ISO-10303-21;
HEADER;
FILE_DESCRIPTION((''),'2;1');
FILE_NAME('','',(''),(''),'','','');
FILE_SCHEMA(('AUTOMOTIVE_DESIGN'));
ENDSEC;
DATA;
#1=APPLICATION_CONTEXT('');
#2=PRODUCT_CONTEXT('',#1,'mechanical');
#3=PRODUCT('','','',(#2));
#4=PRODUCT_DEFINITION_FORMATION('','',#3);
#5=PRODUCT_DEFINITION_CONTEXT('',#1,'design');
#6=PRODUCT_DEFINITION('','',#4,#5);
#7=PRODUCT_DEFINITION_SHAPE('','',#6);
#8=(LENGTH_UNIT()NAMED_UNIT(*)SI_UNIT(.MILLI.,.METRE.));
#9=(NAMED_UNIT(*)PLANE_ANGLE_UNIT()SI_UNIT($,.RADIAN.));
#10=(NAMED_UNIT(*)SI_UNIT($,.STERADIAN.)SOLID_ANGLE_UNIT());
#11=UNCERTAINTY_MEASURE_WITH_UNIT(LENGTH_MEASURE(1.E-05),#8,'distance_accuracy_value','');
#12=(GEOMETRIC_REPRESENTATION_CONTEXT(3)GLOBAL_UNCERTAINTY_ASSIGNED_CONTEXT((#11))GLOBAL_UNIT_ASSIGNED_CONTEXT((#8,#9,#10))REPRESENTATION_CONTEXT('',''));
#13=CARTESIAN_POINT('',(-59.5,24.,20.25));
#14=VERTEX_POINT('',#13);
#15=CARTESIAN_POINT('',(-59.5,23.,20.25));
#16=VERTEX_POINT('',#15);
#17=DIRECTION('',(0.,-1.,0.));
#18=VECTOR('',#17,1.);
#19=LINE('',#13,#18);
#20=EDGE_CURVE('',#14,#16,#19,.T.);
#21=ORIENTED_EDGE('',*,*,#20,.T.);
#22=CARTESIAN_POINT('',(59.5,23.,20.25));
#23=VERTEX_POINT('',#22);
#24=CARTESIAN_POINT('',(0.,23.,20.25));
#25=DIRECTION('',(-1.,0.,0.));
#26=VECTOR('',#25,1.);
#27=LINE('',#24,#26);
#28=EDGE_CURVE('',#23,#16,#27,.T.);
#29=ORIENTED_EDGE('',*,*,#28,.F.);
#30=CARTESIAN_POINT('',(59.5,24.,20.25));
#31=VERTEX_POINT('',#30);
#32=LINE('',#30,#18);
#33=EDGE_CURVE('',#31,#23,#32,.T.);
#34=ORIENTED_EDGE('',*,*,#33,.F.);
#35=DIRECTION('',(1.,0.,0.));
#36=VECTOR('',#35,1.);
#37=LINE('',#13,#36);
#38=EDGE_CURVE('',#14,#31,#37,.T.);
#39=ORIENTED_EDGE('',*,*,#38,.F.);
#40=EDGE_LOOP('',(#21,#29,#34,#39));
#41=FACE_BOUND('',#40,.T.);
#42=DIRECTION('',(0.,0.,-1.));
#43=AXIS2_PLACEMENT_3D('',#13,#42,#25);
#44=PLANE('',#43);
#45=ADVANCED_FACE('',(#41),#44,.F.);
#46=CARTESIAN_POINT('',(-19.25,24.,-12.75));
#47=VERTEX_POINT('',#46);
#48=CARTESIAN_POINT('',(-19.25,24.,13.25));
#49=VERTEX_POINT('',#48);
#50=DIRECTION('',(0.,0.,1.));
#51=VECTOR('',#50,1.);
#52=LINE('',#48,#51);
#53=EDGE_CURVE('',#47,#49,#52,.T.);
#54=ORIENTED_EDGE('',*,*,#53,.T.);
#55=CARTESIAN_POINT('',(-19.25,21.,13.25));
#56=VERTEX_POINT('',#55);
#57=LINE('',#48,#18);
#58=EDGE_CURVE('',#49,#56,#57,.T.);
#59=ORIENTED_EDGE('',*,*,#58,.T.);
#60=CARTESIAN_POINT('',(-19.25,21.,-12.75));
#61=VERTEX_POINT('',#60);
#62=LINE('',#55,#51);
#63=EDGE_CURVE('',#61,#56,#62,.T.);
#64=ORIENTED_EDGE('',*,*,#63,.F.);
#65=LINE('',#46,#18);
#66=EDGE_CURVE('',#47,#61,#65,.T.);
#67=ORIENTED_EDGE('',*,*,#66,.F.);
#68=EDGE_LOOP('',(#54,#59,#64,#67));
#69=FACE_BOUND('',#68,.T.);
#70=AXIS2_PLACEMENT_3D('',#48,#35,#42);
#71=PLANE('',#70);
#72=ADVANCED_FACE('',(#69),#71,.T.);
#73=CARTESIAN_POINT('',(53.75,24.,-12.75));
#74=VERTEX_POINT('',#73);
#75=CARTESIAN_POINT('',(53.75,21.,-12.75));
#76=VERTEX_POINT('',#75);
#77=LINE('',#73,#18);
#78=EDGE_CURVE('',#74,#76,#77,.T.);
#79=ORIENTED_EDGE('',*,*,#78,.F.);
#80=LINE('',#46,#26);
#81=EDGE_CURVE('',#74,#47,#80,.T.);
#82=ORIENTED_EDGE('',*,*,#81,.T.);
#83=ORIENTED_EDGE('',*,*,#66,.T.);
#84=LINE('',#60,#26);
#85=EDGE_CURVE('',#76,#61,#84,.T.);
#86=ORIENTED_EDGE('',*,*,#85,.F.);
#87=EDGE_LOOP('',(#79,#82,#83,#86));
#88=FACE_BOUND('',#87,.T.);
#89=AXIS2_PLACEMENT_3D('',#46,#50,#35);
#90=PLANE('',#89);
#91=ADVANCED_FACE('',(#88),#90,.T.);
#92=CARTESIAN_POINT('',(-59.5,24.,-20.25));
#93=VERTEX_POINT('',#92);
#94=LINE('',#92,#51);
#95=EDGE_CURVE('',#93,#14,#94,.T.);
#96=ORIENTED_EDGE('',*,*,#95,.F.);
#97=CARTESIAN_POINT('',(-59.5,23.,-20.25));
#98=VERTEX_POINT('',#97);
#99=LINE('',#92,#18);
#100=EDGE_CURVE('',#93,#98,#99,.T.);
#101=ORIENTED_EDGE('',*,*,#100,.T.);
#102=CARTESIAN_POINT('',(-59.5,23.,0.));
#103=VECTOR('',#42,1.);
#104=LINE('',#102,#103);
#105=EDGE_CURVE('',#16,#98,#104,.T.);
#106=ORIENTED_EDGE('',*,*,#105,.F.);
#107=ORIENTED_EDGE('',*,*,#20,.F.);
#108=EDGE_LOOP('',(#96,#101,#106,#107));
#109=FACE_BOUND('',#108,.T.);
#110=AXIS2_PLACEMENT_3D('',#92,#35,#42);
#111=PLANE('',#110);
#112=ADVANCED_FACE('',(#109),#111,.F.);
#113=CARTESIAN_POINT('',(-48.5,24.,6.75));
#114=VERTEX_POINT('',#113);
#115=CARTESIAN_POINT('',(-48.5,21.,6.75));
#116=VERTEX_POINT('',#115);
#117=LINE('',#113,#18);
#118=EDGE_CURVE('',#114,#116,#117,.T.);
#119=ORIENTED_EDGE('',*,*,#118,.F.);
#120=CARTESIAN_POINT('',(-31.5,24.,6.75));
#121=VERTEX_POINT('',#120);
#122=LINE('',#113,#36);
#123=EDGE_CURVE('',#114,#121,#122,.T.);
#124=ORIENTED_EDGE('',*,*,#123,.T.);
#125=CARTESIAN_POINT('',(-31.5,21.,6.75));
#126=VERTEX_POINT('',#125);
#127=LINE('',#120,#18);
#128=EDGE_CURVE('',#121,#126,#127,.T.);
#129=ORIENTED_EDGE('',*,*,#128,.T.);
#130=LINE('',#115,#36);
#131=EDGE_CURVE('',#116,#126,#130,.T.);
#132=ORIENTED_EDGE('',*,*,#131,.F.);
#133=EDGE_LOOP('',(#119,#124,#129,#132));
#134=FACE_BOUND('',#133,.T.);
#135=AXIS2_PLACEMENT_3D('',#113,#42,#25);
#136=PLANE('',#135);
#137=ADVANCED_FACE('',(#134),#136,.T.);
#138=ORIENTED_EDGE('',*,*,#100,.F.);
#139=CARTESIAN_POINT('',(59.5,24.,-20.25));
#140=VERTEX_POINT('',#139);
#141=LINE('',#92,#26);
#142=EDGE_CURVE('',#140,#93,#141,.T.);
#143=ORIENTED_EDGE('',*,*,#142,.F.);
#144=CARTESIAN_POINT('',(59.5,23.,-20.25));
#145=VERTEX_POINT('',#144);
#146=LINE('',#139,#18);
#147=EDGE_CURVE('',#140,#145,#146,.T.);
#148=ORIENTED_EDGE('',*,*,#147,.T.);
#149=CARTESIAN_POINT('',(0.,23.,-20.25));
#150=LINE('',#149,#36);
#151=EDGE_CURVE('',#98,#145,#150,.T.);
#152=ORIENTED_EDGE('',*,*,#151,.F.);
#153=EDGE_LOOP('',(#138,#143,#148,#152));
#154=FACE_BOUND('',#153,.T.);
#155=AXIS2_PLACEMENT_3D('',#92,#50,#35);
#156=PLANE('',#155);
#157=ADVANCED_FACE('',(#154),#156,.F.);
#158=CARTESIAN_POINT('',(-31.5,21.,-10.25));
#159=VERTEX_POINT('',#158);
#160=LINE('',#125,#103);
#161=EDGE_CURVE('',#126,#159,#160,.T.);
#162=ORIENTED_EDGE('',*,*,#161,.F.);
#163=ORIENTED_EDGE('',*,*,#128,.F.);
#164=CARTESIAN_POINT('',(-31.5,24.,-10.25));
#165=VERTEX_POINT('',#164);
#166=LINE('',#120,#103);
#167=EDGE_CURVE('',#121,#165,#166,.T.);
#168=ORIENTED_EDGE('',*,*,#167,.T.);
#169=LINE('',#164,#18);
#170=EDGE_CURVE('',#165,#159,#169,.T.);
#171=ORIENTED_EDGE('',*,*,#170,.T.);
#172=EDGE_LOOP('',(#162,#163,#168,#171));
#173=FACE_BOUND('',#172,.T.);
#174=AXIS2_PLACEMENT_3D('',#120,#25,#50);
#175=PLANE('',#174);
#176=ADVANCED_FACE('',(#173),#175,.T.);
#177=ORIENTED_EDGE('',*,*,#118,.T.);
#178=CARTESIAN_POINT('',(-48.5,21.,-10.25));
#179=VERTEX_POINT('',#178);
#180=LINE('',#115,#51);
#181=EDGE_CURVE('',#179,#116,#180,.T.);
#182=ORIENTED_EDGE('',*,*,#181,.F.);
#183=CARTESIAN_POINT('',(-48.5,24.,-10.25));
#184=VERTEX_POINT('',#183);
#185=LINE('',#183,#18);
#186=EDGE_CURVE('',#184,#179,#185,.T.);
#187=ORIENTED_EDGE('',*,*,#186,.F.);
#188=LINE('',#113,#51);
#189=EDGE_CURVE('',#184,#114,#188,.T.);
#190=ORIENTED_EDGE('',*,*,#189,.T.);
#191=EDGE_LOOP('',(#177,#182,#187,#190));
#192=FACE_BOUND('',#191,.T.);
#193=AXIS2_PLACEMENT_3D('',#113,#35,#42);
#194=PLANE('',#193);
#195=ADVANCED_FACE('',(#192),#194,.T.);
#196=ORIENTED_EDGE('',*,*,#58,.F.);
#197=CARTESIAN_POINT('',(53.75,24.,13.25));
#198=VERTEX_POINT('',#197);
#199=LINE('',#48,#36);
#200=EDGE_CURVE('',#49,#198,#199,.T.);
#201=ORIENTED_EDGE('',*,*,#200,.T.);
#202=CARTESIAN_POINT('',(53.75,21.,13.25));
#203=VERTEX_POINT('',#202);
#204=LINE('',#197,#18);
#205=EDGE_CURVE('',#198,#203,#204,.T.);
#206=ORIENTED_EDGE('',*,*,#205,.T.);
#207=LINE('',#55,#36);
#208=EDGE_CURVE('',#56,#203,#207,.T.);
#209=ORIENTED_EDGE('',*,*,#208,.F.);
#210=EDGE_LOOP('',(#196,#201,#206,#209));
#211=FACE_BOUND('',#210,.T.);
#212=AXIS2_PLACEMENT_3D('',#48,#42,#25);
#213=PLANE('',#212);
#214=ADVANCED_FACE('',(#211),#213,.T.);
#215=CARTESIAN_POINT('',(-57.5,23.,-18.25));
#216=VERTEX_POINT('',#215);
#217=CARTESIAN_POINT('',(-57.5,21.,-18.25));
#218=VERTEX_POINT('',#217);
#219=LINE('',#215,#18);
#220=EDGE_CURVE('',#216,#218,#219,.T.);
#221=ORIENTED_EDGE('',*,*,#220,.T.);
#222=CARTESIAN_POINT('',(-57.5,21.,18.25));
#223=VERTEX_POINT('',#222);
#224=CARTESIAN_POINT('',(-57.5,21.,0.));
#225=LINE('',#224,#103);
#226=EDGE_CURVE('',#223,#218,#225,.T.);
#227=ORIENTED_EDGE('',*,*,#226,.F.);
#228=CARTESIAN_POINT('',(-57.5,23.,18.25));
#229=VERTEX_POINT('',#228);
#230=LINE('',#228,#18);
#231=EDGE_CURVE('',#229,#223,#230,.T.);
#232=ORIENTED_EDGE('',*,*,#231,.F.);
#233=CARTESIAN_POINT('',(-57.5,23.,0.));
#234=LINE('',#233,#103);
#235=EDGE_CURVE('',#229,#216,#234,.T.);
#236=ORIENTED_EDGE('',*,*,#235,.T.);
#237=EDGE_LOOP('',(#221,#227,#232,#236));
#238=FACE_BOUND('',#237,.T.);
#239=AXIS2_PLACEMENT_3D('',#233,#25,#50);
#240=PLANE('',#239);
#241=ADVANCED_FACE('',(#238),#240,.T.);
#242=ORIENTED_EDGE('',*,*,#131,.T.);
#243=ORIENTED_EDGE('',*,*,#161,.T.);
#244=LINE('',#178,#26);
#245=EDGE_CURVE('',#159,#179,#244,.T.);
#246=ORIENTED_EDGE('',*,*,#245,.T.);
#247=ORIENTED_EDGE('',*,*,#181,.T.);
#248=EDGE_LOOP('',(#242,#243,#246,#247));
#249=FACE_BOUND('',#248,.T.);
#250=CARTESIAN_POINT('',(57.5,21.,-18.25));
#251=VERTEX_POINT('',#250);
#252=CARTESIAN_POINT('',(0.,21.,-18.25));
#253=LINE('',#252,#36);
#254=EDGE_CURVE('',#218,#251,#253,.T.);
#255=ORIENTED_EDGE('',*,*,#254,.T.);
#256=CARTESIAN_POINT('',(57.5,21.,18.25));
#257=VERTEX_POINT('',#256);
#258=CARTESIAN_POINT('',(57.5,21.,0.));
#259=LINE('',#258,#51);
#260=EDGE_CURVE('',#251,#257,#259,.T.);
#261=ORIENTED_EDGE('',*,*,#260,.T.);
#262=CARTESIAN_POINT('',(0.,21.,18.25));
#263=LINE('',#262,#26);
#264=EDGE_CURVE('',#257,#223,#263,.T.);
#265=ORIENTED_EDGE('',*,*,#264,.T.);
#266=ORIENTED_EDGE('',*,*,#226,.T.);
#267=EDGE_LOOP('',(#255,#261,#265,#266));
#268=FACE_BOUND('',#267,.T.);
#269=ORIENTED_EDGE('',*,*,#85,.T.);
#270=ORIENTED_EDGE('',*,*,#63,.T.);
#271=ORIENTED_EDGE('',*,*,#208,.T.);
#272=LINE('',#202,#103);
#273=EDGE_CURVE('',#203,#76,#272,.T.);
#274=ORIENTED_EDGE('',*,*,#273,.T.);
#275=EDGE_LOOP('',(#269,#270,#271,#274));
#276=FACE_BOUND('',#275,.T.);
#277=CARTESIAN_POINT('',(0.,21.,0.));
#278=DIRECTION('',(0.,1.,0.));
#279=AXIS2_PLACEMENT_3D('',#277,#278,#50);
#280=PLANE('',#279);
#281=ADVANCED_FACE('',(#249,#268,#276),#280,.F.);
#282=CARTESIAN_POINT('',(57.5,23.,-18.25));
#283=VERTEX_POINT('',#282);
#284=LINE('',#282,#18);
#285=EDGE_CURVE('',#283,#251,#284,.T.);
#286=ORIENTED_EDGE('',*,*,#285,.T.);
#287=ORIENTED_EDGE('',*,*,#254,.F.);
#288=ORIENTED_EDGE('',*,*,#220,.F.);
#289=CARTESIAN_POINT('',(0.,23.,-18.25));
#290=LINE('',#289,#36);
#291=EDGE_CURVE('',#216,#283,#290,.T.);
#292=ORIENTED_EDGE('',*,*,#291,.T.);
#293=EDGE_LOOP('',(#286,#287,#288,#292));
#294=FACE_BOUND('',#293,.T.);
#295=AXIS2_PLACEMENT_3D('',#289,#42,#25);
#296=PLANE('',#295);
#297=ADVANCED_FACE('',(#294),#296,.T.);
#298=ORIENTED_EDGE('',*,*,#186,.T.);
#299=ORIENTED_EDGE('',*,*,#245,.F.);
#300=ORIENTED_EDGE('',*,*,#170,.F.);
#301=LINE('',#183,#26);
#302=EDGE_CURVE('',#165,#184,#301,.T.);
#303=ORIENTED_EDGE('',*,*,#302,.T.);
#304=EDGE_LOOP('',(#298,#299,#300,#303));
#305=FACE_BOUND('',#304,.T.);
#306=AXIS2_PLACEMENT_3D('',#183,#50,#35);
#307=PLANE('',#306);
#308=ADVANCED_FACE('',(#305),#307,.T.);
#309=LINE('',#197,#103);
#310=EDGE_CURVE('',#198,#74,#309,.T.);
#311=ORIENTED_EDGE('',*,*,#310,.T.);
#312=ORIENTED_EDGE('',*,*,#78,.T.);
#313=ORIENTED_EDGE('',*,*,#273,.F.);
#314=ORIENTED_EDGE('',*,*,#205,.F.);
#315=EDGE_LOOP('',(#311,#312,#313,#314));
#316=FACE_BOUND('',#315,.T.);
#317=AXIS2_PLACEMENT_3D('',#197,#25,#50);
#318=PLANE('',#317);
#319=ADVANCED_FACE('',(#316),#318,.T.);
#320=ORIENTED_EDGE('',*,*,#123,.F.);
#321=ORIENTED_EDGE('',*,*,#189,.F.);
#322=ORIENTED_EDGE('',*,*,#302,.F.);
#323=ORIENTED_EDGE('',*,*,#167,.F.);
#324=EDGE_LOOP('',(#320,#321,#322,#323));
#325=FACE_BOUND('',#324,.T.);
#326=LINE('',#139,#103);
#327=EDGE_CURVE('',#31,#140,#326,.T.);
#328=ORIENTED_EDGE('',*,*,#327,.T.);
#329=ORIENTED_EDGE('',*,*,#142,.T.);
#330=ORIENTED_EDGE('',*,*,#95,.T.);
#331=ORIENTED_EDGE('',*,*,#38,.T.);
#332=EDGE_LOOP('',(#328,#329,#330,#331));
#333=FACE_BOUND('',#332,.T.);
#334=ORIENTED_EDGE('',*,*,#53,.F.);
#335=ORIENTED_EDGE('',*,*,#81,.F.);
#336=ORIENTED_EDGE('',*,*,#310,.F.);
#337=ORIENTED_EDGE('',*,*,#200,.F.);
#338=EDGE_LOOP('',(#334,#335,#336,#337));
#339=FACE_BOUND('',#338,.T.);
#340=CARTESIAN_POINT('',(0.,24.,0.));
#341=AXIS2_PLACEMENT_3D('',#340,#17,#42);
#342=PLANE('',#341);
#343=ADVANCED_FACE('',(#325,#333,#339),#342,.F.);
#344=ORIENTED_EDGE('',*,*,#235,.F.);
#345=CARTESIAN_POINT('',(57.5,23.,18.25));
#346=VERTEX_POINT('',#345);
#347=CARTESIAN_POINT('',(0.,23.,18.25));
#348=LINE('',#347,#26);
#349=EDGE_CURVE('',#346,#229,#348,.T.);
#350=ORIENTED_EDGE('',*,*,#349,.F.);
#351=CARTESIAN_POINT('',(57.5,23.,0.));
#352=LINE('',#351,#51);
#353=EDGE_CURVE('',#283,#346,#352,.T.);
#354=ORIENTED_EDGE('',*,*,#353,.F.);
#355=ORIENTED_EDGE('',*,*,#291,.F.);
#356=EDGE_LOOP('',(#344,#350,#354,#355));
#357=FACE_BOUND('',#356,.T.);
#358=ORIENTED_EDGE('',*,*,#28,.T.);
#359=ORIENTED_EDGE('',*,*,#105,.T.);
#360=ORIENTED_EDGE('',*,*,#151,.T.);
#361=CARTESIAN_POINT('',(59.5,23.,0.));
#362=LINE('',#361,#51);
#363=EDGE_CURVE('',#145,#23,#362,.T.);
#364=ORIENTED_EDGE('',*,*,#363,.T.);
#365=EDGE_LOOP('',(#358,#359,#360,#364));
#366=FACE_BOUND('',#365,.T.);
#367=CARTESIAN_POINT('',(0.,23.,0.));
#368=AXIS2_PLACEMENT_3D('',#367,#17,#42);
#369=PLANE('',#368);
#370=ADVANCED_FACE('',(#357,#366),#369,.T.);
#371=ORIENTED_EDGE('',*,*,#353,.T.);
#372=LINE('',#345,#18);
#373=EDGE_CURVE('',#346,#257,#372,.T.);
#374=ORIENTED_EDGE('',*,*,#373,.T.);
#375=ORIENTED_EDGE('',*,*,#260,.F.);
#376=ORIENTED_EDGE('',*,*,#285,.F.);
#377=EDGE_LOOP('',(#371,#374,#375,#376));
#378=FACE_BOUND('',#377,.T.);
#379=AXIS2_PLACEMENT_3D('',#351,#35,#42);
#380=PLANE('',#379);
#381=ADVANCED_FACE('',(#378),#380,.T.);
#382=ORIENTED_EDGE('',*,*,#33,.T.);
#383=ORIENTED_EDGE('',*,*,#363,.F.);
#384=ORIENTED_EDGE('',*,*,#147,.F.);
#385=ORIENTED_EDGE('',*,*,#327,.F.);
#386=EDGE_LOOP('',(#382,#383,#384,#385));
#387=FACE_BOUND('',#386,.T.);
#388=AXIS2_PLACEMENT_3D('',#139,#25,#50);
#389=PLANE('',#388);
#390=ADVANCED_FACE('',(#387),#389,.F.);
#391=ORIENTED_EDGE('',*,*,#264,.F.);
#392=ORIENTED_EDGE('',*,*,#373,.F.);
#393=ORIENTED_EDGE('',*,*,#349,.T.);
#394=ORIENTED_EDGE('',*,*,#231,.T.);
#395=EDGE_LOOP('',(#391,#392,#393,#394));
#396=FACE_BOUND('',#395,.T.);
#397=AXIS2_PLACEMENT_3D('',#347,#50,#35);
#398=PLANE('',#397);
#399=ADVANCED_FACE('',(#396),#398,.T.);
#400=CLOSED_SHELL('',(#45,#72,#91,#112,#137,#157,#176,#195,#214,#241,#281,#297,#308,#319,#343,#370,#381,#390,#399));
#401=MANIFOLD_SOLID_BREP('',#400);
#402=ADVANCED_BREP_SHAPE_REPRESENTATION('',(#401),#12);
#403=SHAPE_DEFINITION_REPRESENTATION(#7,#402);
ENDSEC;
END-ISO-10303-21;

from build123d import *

# Parameters (mm, degrees)
SKETCH1_W                = 115
SKETCH1_H                = 36.5
BOSS_EXTRUDE1_DEPTH      = 1
BOSS_EXTRUDE2_DEPTH      = 20
BOSS_EXTRUDE2_DEPTH_BACK = 1
SKETCH2_W                = 119
SKETCH2_H                = 40.5
SKETCH2_W_2              = 115
SKETCH2_H_2              = 36.5
SKETCH3_R                = 1.5
SKETCH3_W                = 6
SKETCH3_H                = 6
BOSS_EXTRUDE3_DEPTH      = 3
SKETCH4_R                = 1.5
SKETCH4_W                = 5.5
SKETCH4_H                = 6.495155074
BOSS_EXTRUDE4_DEPTH      = 8
SKETCH5_W                = 15
SKETCH5_H                = 10
CUT_EXTRUDE1_DEPTH       = 8
SKETCH6_W                = 46
SKETCH6_H                = 7.792677535
CUT_EXTRUDE2_DEPTH       = 8
SKETCH7_W                = 10.3
SKETCH7_H                = 10.3
CUT_EXTRUDE3_DEPTH       = 8
SKETCH8_W                = 15
SKETCH8_H                = 5
CUT_EXTRUDE4_DEPTH       = 8
SKETCH9_W                = 119
SKETCH9_H                = 40.5
SKETCH9_W_2              = 17
SKETCH9_H_2              = 17
SKETCH9_W_3              = 73
SKETCH9_H_3              = 26
BOSS_EXTRUDE5_DEPTH      = 3
SKETCH10_W               = 119
SKETCH10_H               = 40.5
SKETCH10_W_2             = 115
SKETCH10_H_2             = 36.5
CUT_EXTRUDE5_DEPTH       = 2


with BuildPart() as part:
    # Sketch1 → Boss-Extrude1 (new body)
    with BuildSketch(Plane(origin=(0, 0, 0), x_dir=(1, 0, 0), z_dir=(0, 1, 0))):
        Rectangle(SKETCH1_W, SKETCH1_H)
    extrude(amount=BOSS_EXTRUDE1_DEPTH)


with BuildPart() as body_2:
    # Sketch2 → Boss-Extrude2 (new, two sides: drawn at the far end of the back side and taken through both)
    with BuildSketch(Plane(origin=(0, 1, 0), x_dir=(1, 0, 0), z_dir=(0, 1, 0)).offset(-BOSS_EXTRUDE2_DEPTH_BACK)):
        Rectangle(SKETCH2_W, SKETCH2_H)
        Rectangle(SKETCH2_W_2, SKETCH2_H_2, mode=Mode.SUBTRACT)
    extrude(amount=BOSS_EXTRUDE2_DEPTH + BOSS_EXTRUDE2_DEPTH_BACK)

    # Intersect1: read off the stored shape, not the designer's step
    # Intersect1: union part
    add(part.part)

    # Sketch3 → Boss-Extrude3 (add)
    # profile 1 of 4: a face of its own
    with BuildSketch(Plane(origin=(0, 1, 0), x_dir=(1, 0, 0), z_dir=(0, 1, 0))):
        Polygon((-51.5, 7.25), (-51.5, 13.25), (-54, 13.25), (-57.5, 13.25), (-57.5, 9.75), (-57.5, 7.25), align=None)
        with Locations(Location((-54, 9.75, 0), (0, 0, 270))):
            Circle(SKETCH3_R, mode=Mode.SUBTRACT)
    # profile 2 of 4: a face of its own
    with BuildSketch(Plane(origin=(0, 1, 0), x_dir=(1, 0, 0), z_dir=(0, 1, 0))):
        with Locations((-25.5, 10.25)):
            Rectangle(SKETCH3_W, SKETCH3_H)
        with Locations(Location((-26, 9.75, 0), (0, 0, 90))):
            Circle(SKETCH3_R, mode=Mode.SUBTRACT)
    # profile 3 of 4: a face of its own
    with BuildSketch(Plane(origin=(0, 1, 0), x_dir=(1, 0, 0), z_dir=(0, 1, 0))):
        with Locations((-25.5, -10.25)):
            Rectangle(SKETCH3_W, SKETCH3_H)
        with Locations(Location((-26, -9.75, 0), (0, 0, 270))):
            Circle(SKETCH3_R, mode=Mode.SUBTRACT)
    # profile 4 of 4: a face of its own
    with BuildSketch(Plane(origin=(0, 1, 0), x_dir=(1, 0, 0), z_dir=(0, 1, 0))):
        with Locations((-54.5, -10.25)):
            Rectangle(SKETCH3_W, SKETCH3_H)
        with Locations(Location((-54, -9.75, 0), (0, 0, 90))):
            Circle(SKETCH3_R, mode=Mode.SUBTRACT)
    extrude(amount=BOSS_EXTRUDE3_DEPTH)

    # Sketch4 → Boss-Extrude4 (add)
    # profile 1 of 4: a face of its own
    with BuildSketch(Plane(origin=(0, 1, 0), x_dir=(1, 0, 0), z_dir=(0, 1, 0))):
        Polygon((-22.5, 13.25), (-22.5, 11.754844926), (-17, 11.754844926), (-17, 18.25), (-20, 18.25), (-22.5, 18.25), (-22.5, 15.25), align=None)
        with Locations(Location((-20, 15.25, 0), (0, 0, 270))):
            Circle(SKETCH4_R, mode=Mode.SUBTRACT)
    # profile 2 of 4: a face of its own
    with BuildSketch(Plane(origin=(0, 1, 0), x_dir=(1, 0, 0), z_dir=(0, 1, 0))):
        with Locations((-19.75, -15.002422463)):
            Rectangle(SKETCH4_W, SKETCH4_H)
        with Locations(Location((-20, -15.25, 0), (0, 0, 90))):
            Circle(SKETCH4_R, mode=Mode.SUBTRACT)
    # profile 3 of 4: a face of its own
    with BuildSketch(Plane(origin=(0, 1, 0), x_dir=(1, 0, 0), z_dir=(0, 1, 0))):
        with Locations((54.75, -15.002422463)):
            Rectangle(SKETCH4_W, SKETCH4_H)
        with Locations(Location((55, -15.25, 0), (0, 0, 270))):
            Circle(SKETCH4_R, mode=Mode.SUBTRACT)
    # profile 4 of 4: a face of its own
    with BuildSketch(Plane(origin=(0, 1, 0), x_dir=(1, 0, 0), z_dir=(0, 1, 0))):
        with Locations((54.75, 15.002422463)):
            Rectangle(SKETCH4_W, SKETCH4_H)
        with Locations(Location((55, 15.25, 0), (0, 0, 90))):
            Circle(SKETCH4_R, mode=Mode.SUBTRACT)
    extrude(amount=BOSS_EXTRUDE4_DEPTH)

    # Sketch5 → Cut-Extrude1 (cut)
    with BuildSketch(Plane.ZY.offset(59.5)):
        with Locations((0, 11.525411997)):
            Rectangle(SKETCH5_W, SKETCH5_H)
    extrude(amount=-CUT_EXTRUDE1_DEPTH, mode=Mode.SUBTRACT)

    # Sketch6 → Cut-Extrude2 (cut)
    with BuildSketch(Plane(origin=(0, 0, -20.25), x_dir=(-1, 0, 0), z_dir=(0, 0, -1))):
        with Locations((-6.5, 11.396338768)):
            Rectangle(SKETCH6_W, SKETCH6_H)
    extrude(amount=-CUT_EXTRUDE2_DEPTH, mode=Mode.SUBTRACT)

    # Sketch7 → Cut-Extrude3 (cut)
    with BuildSketch(Plane.XY.offset(20.25)):
        with Locations((-49.05, 10.55)):
            Rectangle(SKETCH7_W, SKETCH7_H)
    extrude(amount=-CUT_EXTRUDE3_DEPTH, mode=Mode.SUBTRACT)

    # Sketch8 → Cut-Extrude4 (cut)
    with BuildSketch(Plane(origin=(0, 0, -20.25), x_dir=(-1, 0, 0), z_dir=(0, 0, -1))):
        with Locations((40.794043984, 3.5)):
            Rectangle(SKETCH8_W, SKETCH8_H)
    extrude(amount=-CUT_EXTRUDE4_DEPTH, mode=Mode.SUBTRACT)


with BuildPart() as body_2_2:
    # Sketch9 → Boss-Extrude5 (new body)
    with BuildSketch(Plane(origin=(0, 21, 0), x_dir=(1, 0, 0), z_dir=(0, 1, 0))):
        Rectangle(SKETCH9_W, SKETCH9_H)
        with Locations((-40, 1.75)):
            Rectangle(SKETCH9_W_2, SKETCH9_H_2, mode=Mode.SUBTRACT)
        with Locations((17.25, -0.25)):
            Rectangle(SKETCH9_W_3, SKETCH9_H_3, mode=Mode.SUBTRACT)
    extrude(amount=BOSS_EXTRUDE5_DEPTH)

    # Sketch10 → Cut-Extrude5 (cut)
    with BuildSketch(Plane.XZ.offset(-21)):
        Rectangle(SKETCH10_W, SKETCH10_H)
        Rectangle(SKETCH10_W_2, SKETCH10_H_2, mode=Mode.SUBTRACT)
    extrude(amount=-CUT_EXTRUDE5_DEPTH, mode=Mode.SUBTRACT)


solid = body_2_2.part
